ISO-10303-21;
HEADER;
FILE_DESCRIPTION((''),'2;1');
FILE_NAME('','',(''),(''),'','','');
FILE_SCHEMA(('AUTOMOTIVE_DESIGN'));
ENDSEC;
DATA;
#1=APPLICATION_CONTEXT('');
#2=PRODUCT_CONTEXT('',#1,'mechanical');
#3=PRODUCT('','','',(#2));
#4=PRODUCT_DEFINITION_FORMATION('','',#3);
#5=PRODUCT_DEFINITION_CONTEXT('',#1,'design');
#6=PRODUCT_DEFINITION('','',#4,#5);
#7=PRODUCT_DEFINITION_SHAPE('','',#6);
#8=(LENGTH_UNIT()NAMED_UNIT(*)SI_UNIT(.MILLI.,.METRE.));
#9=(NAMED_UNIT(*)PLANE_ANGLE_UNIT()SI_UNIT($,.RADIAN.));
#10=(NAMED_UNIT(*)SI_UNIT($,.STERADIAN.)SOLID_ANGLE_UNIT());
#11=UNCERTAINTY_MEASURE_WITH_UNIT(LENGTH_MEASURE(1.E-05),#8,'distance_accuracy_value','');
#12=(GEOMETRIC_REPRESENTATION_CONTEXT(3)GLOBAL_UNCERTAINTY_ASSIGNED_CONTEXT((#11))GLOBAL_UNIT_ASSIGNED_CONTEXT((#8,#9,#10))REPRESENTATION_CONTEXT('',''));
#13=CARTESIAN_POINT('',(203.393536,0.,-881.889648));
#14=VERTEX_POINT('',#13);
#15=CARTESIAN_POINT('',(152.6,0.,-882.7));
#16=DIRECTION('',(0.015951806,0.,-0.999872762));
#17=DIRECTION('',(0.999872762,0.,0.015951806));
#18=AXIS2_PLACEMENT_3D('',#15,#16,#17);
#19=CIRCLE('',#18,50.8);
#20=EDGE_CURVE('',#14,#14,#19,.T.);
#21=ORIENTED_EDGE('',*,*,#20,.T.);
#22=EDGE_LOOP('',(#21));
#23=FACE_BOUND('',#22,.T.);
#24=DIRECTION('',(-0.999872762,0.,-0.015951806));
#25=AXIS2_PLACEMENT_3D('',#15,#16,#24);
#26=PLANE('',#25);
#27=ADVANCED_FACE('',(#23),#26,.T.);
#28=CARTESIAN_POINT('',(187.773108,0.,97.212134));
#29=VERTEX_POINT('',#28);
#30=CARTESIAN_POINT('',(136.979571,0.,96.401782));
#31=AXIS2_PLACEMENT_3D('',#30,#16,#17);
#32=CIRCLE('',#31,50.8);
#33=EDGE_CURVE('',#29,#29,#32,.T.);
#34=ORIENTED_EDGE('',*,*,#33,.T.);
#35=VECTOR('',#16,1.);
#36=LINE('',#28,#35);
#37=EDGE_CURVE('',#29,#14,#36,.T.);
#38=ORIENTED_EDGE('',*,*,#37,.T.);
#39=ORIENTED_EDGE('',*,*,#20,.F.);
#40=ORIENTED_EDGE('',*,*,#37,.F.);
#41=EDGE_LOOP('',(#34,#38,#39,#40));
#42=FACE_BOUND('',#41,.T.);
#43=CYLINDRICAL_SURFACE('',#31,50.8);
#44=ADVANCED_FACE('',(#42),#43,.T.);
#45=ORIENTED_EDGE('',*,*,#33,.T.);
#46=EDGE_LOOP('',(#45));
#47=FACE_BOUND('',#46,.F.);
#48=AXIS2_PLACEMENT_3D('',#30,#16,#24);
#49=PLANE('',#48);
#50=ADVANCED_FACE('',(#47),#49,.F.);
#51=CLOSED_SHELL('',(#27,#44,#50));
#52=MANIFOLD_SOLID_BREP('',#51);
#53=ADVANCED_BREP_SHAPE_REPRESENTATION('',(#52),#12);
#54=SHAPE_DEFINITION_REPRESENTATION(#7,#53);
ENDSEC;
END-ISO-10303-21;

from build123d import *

# Parameters (mm, degrees)
F2_R = 50.8


with BuildPart() as f3:
    # F3: sweep along a path in F0
    with BuildLine(Plane.XZ) as f3_path:
        Line((136.979571281, 96.4017822322), (152.6, -882.7))
    # F2 (on face) → F3 (sweep)
    with BuildSketch(Plane(origin=(6.3074833784, 0, -395.3584327465), x_dir=(0.9998727619, 0, 0.0159518055), z_dir=(0.0159518055, 0, -0.9998727619))):
        with Locations((138.4999247355, 0)):
            Circle(F2_R)
    sweep(path=f3_path.line)


solid = f3.part
